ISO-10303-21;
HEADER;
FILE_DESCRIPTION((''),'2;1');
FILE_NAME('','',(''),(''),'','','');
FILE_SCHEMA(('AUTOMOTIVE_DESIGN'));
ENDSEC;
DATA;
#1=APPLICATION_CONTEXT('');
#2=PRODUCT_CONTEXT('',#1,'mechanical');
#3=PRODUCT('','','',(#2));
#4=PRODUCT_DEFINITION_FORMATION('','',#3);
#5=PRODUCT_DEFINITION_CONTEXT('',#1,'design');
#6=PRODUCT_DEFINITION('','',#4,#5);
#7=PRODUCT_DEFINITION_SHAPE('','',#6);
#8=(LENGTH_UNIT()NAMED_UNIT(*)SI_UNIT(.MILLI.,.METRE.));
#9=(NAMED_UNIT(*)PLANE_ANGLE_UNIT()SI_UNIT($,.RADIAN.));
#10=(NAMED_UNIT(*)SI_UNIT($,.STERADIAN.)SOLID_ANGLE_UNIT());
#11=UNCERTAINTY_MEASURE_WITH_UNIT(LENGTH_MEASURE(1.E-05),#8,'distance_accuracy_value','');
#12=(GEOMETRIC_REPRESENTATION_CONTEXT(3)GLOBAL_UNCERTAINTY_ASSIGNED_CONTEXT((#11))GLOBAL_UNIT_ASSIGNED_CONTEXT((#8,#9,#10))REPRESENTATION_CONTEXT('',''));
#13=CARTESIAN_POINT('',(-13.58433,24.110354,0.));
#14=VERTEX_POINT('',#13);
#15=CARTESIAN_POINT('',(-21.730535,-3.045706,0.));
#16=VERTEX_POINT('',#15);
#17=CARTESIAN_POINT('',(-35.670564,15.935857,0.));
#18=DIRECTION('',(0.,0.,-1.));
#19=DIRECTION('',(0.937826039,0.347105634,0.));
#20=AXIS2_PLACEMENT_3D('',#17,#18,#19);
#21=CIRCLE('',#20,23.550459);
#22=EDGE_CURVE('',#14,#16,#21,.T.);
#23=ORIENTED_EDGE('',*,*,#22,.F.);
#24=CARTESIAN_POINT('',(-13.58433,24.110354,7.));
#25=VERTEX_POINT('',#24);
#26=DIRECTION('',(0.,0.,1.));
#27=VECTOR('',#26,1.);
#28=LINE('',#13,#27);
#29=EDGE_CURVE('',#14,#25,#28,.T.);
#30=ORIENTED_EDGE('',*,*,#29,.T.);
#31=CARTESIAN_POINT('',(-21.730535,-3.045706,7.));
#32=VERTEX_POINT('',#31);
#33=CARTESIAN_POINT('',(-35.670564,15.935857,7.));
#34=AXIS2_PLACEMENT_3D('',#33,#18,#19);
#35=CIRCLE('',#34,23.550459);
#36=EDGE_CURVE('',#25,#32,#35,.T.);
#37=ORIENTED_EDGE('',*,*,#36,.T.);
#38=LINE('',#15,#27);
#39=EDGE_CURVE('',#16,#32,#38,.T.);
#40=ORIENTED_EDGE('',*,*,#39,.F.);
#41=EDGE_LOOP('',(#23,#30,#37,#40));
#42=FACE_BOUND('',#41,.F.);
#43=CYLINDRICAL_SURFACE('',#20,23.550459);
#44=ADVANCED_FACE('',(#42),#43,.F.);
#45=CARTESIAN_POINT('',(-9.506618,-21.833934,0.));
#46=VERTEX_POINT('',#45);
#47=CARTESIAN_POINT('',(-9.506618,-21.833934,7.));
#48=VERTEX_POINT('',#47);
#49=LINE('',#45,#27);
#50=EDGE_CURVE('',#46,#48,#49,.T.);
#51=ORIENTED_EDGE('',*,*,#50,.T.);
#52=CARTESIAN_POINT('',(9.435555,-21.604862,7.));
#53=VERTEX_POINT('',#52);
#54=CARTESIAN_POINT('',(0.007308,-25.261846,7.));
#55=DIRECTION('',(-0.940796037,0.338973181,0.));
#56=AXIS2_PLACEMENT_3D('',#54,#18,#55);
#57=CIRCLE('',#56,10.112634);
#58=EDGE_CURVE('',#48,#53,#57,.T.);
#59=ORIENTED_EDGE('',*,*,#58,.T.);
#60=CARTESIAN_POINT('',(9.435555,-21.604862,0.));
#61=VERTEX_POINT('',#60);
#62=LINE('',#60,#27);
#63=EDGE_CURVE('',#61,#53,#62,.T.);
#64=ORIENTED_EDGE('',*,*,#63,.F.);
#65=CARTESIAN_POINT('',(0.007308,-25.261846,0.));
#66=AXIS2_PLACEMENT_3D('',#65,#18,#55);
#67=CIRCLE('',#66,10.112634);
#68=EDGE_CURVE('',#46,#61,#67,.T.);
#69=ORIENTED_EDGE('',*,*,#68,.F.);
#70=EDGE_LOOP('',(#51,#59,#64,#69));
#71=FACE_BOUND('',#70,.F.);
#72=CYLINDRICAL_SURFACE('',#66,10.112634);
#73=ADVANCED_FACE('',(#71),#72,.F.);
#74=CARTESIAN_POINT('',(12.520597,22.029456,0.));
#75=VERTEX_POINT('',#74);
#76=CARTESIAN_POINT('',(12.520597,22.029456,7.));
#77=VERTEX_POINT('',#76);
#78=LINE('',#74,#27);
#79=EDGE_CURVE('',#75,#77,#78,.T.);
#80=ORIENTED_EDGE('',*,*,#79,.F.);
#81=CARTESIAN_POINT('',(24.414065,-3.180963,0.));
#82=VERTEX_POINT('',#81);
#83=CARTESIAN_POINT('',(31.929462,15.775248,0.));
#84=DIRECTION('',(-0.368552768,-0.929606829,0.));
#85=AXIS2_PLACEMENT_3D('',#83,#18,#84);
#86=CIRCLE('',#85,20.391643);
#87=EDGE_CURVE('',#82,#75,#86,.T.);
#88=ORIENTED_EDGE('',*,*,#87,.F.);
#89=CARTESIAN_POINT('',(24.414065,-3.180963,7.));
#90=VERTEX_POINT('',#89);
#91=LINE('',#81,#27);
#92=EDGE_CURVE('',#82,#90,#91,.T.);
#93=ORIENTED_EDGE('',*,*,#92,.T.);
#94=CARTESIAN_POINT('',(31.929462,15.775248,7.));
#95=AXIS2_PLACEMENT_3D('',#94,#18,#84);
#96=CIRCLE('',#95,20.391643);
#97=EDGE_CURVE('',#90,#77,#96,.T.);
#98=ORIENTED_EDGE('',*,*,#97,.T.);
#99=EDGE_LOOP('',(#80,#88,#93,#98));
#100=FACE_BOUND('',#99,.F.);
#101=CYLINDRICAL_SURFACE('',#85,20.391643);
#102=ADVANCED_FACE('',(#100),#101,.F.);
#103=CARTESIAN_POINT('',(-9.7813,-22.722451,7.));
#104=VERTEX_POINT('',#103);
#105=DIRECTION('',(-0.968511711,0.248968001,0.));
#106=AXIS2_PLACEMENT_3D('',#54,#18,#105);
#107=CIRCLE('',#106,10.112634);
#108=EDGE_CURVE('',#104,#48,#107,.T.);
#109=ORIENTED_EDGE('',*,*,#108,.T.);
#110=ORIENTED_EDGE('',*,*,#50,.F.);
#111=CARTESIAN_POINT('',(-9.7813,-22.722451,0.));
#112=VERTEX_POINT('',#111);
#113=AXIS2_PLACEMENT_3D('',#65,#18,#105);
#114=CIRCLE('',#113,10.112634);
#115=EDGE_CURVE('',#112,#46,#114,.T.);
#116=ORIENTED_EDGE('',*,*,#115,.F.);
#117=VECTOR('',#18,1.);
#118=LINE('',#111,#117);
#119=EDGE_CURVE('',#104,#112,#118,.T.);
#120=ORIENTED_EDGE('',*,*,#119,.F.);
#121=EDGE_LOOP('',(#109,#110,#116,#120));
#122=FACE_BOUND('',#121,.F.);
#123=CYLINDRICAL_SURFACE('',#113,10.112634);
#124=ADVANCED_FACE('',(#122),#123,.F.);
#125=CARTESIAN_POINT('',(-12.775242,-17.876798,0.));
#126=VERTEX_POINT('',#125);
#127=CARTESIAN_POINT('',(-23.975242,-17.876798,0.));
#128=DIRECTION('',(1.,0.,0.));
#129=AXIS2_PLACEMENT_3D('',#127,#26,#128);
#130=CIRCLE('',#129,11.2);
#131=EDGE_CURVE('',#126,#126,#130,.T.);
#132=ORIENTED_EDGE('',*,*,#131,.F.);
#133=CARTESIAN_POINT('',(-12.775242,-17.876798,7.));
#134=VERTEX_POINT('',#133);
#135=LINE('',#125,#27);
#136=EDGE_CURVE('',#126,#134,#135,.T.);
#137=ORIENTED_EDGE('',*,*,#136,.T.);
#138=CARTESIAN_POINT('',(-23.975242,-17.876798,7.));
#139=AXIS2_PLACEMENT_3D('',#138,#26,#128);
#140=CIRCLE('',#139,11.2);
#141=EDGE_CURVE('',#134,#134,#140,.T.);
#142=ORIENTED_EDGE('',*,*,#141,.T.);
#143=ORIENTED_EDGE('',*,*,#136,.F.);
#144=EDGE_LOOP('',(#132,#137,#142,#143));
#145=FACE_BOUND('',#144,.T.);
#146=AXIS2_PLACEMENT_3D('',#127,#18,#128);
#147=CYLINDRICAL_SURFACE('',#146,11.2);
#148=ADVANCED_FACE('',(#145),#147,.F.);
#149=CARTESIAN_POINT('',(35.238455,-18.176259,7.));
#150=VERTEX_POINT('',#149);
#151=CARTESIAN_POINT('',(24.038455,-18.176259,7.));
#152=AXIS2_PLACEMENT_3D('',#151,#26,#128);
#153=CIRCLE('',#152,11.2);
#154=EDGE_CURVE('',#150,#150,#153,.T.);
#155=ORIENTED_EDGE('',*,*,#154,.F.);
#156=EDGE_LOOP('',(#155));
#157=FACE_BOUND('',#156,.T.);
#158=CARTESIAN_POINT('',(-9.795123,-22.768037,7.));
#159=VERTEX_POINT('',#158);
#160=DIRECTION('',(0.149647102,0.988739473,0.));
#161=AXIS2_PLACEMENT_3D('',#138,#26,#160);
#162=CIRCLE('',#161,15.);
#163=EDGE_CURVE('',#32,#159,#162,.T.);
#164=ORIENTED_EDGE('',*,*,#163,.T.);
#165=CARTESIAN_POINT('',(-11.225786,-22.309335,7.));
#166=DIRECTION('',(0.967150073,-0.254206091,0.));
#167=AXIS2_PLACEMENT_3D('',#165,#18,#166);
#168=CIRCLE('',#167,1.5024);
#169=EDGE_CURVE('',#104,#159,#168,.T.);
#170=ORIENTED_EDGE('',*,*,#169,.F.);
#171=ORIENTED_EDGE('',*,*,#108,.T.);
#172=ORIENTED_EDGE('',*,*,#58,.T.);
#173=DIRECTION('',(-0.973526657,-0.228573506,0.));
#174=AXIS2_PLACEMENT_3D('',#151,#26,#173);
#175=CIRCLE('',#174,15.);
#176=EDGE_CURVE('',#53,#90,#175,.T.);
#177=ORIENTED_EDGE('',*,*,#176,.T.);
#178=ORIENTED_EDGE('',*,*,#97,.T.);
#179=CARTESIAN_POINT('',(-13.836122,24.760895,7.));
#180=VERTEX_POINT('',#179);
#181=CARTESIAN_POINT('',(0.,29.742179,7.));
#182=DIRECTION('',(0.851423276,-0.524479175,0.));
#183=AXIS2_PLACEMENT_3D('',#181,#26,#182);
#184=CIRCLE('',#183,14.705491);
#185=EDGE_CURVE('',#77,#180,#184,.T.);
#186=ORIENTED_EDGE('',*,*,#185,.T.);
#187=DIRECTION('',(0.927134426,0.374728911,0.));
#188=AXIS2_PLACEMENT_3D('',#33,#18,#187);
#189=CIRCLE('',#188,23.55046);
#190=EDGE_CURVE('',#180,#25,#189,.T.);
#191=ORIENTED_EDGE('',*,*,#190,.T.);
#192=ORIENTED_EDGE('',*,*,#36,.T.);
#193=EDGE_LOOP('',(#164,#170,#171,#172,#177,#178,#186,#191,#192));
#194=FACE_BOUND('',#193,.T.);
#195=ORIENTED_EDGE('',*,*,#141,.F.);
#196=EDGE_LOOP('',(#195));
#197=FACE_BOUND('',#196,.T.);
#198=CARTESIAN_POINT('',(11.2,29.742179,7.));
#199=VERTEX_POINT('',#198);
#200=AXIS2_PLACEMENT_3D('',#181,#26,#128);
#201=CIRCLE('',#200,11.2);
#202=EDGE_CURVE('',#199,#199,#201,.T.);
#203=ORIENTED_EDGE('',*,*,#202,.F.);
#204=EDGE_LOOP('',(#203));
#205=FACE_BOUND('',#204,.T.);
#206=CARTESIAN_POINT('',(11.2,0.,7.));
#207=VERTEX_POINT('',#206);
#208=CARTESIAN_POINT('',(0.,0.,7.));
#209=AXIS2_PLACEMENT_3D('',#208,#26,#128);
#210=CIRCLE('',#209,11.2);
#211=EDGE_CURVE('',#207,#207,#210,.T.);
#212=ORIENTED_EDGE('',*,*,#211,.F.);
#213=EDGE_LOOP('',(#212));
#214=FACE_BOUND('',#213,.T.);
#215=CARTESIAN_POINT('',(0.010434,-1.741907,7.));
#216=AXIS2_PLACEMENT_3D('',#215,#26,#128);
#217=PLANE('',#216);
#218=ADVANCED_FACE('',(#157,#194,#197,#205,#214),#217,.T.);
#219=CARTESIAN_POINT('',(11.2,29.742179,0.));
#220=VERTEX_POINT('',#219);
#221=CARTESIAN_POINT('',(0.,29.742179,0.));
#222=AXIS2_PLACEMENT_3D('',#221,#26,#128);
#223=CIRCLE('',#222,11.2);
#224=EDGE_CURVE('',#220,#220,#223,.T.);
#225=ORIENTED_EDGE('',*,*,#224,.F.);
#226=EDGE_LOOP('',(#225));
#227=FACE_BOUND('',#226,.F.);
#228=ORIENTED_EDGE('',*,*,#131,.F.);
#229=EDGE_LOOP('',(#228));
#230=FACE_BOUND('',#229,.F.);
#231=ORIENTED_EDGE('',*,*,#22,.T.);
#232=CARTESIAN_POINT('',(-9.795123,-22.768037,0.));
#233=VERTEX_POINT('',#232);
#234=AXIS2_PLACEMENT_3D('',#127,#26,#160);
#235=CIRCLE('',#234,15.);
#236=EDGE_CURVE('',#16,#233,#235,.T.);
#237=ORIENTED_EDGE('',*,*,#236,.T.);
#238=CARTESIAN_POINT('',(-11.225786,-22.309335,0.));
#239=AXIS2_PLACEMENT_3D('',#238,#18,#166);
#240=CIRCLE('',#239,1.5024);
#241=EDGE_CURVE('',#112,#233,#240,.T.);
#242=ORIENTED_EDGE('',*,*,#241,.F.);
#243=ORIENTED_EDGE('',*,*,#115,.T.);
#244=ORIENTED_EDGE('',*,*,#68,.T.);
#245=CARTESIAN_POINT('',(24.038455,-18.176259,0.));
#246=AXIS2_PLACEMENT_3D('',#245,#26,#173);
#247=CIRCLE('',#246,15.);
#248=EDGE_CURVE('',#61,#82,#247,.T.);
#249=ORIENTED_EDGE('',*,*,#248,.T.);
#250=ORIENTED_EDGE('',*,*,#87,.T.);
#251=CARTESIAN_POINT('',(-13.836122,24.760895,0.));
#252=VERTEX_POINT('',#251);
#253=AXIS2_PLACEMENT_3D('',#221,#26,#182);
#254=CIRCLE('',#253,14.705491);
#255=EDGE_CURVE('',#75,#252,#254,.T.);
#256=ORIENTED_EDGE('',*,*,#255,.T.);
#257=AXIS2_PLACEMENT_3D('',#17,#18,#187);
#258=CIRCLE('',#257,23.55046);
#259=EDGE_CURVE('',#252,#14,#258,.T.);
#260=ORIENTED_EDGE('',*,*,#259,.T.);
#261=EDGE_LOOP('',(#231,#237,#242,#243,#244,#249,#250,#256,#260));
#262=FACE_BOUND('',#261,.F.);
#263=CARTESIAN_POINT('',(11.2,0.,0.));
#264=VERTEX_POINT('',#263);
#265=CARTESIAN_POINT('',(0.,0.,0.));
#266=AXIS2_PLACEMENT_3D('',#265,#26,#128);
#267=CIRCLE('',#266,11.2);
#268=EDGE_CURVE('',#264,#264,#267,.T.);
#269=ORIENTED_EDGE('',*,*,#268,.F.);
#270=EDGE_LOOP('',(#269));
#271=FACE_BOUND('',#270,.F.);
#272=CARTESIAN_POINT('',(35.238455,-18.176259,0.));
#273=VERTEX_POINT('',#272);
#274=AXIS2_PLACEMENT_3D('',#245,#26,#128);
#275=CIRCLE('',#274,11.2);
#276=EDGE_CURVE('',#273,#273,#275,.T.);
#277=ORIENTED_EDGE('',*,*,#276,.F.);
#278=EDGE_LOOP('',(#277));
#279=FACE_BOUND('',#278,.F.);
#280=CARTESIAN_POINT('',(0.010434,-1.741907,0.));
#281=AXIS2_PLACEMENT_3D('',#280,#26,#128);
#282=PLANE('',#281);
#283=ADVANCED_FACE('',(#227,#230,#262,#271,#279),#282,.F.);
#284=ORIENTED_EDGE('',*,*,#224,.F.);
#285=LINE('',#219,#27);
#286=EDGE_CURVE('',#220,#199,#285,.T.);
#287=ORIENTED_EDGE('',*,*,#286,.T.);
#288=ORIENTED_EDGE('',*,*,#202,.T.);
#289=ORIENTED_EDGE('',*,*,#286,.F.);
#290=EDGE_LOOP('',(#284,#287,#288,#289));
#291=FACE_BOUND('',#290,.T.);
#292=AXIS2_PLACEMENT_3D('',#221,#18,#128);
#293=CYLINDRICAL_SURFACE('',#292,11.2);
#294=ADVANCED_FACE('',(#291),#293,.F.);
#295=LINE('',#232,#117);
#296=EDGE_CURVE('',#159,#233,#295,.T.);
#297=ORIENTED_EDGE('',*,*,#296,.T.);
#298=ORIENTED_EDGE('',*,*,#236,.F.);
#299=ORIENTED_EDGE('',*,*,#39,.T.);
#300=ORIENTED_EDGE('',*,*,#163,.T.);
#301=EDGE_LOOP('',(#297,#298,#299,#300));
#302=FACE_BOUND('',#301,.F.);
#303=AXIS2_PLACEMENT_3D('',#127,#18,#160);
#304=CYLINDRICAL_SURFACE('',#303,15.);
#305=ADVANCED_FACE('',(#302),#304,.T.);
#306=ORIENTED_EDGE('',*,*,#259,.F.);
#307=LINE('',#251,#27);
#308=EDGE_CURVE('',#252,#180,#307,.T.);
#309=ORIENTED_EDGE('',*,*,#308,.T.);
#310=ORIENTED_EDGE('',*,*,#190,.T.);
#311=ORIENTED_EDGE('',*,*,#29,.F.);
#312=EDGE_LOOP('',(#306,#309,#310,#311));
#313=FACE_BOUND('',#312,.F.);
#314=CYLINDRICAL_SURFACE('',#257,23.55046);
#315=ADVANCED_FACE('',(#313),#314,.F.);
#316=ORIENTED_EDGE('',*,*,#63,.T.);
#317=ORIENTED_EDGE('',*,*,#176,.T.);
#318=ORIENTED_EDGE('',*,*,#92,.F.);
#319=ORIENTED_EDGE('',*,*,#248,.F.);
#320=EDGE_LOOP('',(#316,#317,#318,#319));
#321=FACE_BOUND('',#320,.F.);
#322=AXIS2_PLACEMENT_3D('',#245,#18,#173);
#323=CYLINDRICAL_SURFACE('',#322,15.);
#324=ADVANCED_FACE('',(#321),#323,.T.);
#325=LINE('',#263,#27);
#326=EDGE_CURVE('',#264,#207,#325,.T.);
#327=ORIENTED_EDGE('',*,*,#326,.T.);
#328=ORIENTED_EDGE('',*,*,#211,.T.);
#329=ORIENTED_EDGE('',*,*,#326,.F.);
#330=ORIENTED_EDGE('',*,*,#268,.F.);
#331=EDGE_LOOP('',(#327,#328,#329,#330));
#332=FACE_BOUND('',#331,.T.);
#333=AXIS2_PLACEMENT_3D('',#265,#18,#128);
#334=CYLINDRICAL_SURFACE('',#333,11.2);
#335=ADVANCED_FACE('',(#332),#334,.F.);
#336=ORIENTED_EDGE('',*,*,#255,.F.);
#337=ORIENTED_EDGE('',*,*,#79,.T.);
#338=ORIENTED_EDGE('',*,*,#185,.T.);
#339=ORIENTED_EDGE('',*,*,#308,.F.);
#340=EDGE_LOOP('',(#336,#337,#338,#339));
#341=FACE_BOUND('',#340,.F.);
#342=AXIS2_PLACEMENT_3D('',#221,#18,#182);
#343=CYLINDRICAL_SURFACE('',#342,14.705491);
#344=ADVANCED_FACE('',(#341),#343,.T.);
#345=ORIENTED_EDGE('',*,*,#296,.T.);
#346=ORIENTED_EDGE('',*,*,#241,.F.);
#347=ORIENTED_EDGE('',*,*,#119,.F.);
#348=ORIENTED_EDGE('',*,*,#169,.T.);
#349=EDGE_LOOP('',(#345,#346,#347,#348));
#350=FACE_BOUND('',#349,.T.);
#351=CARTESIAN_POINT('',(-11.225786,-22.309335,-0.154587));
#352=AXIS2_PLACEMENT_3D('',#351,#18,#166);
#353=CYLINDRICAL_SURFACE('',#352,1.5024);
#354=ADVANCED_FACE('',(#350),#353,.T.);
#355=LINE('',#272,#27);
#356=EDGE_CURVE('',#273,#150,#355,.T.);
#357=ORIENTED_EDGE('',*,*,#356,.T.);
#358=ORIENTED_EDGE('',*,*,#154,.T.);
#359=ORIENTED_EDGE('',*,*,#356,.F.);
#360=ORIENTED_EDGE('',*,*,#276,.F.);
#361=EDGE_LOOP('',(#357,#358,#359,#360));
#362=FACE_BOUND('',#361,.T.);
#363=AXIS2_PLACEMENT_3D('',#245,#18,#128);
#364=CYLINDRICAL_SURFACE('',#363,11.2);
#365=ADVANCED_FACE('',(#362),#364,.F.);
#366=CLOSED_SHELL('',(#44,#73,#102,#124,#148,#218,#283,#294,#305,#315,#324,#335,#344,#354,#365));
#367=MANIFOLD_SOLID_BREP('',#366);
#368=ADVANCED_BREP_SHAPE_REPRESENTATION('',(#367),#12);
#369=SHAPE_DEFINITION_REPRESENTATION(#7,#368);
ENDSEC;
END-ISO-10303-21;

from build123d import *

# Parameters (mm, degrees)
F0_R        = 11.2
F1_DEPTH    = 7
F2_T1_DEPTH = 7.3091738438


# Not quite as in the source:
# - a fillet or chamfer that OpenCascade refuses, or shapes differently, is made with other operations: its cross-section is extruded or revolved along the edge and cut away or added


with BuildPart() as f1:
    # F0 (on Top) → F1 (new body)
    with BuildSketch(Plane.XY):
        with BuildLine():
            ThreePointArc((24.4140649416, -3.1809629834), (13.4871120811, 7.0747385166), (12.5205974964, 22.0294555527))
            ThreePointArc((12.5205974964, 22.0294555527), (1.5158634118, 44.3693332806), (-13.8361222225, 24.7608951415))
            ThreePointArc((-13.8361222225, 24.7608951415), (-13.7078172482, 24.4365570296), (-13.5843298249, 24.1103542803))
            ThreePointArc((-13.5843298249, 24.1103542803), (-13.113174784, 9.1691492017), (-21.7305353918, -3.0457061978))
            ThreePointArc((-21.7305353918, -3.0457061978), (-36.801707194, -25.6538021325), (-9.7868965809, -22.7441236587))
            ThreePointArc((-9.7868965809, -22.7441236587), (-9.6574780237, -22.2857276707), (-9.506618108, -21.8339342105))
            ThreePointArc((-9.506618108, -21.8339342105), (-0.1149775919, -15.1499512762), (9.4355546579, -21.6048620576))
            ThreePointArc((9.4355546579, -21.6048620576), (35.6773528954, -27.6386082592), (24.4140649416, -3.1809629834))
        make_face()
        with Locations((-23.9752419293, -17.876798287)):
            Circle(F0_R, mode=Mode.SUBTRACT)
        Circle(F0_R, mode=Mode.SUBTRACT)
        with Locations((24.0384545177, -18.176259473)):
            Circle(F0_R, mode=Mode.SUBTRACT)
        with Locations((0, 29.7421794385)):
            Circle(F0_R, mode=Mode.SUBTRACT)
    extrude(amount=F1_DEPTH)

    # F2: fillet of radius 1.5 on 1 edges, made by hand

    # F2_s2 → F2_t1 (cut)
    with BuildSketch(Plane.XY.offset(-0.1545869219)):
        with BuildLine():
            ThreePointArc((-9.7727399665, -22.6912544357), (-9.7886409139, -22.7473067601), (-9.8067032425, -22.8027004014))
            Line((-9.8067032425, -22.8027004014), (-9.6647949432, -22.8520369213))
            ThreePointArc((-9.6647949432, -22.8520369213), (-9.6549491563, -22.8224010768), (-9.6447861139, -22.7928747896))
            Line((-9.6447861139, -22.7928747896), (-9.6413873814, -22.7815286112))
            ThreePointArc((-9.6413873814, -22.7815286112), (-9.6346402283, -22.7554279828), (-9.6274353396, -22.7294463591))
            Line((-9.6274353396, -22.7294463591), (-9.7727399665, -22.6912544357))
        make_face()
    extrude(amount=F2_T1_DEPTH, mode=Mode.SUBTRACT)


solid = f1.part
